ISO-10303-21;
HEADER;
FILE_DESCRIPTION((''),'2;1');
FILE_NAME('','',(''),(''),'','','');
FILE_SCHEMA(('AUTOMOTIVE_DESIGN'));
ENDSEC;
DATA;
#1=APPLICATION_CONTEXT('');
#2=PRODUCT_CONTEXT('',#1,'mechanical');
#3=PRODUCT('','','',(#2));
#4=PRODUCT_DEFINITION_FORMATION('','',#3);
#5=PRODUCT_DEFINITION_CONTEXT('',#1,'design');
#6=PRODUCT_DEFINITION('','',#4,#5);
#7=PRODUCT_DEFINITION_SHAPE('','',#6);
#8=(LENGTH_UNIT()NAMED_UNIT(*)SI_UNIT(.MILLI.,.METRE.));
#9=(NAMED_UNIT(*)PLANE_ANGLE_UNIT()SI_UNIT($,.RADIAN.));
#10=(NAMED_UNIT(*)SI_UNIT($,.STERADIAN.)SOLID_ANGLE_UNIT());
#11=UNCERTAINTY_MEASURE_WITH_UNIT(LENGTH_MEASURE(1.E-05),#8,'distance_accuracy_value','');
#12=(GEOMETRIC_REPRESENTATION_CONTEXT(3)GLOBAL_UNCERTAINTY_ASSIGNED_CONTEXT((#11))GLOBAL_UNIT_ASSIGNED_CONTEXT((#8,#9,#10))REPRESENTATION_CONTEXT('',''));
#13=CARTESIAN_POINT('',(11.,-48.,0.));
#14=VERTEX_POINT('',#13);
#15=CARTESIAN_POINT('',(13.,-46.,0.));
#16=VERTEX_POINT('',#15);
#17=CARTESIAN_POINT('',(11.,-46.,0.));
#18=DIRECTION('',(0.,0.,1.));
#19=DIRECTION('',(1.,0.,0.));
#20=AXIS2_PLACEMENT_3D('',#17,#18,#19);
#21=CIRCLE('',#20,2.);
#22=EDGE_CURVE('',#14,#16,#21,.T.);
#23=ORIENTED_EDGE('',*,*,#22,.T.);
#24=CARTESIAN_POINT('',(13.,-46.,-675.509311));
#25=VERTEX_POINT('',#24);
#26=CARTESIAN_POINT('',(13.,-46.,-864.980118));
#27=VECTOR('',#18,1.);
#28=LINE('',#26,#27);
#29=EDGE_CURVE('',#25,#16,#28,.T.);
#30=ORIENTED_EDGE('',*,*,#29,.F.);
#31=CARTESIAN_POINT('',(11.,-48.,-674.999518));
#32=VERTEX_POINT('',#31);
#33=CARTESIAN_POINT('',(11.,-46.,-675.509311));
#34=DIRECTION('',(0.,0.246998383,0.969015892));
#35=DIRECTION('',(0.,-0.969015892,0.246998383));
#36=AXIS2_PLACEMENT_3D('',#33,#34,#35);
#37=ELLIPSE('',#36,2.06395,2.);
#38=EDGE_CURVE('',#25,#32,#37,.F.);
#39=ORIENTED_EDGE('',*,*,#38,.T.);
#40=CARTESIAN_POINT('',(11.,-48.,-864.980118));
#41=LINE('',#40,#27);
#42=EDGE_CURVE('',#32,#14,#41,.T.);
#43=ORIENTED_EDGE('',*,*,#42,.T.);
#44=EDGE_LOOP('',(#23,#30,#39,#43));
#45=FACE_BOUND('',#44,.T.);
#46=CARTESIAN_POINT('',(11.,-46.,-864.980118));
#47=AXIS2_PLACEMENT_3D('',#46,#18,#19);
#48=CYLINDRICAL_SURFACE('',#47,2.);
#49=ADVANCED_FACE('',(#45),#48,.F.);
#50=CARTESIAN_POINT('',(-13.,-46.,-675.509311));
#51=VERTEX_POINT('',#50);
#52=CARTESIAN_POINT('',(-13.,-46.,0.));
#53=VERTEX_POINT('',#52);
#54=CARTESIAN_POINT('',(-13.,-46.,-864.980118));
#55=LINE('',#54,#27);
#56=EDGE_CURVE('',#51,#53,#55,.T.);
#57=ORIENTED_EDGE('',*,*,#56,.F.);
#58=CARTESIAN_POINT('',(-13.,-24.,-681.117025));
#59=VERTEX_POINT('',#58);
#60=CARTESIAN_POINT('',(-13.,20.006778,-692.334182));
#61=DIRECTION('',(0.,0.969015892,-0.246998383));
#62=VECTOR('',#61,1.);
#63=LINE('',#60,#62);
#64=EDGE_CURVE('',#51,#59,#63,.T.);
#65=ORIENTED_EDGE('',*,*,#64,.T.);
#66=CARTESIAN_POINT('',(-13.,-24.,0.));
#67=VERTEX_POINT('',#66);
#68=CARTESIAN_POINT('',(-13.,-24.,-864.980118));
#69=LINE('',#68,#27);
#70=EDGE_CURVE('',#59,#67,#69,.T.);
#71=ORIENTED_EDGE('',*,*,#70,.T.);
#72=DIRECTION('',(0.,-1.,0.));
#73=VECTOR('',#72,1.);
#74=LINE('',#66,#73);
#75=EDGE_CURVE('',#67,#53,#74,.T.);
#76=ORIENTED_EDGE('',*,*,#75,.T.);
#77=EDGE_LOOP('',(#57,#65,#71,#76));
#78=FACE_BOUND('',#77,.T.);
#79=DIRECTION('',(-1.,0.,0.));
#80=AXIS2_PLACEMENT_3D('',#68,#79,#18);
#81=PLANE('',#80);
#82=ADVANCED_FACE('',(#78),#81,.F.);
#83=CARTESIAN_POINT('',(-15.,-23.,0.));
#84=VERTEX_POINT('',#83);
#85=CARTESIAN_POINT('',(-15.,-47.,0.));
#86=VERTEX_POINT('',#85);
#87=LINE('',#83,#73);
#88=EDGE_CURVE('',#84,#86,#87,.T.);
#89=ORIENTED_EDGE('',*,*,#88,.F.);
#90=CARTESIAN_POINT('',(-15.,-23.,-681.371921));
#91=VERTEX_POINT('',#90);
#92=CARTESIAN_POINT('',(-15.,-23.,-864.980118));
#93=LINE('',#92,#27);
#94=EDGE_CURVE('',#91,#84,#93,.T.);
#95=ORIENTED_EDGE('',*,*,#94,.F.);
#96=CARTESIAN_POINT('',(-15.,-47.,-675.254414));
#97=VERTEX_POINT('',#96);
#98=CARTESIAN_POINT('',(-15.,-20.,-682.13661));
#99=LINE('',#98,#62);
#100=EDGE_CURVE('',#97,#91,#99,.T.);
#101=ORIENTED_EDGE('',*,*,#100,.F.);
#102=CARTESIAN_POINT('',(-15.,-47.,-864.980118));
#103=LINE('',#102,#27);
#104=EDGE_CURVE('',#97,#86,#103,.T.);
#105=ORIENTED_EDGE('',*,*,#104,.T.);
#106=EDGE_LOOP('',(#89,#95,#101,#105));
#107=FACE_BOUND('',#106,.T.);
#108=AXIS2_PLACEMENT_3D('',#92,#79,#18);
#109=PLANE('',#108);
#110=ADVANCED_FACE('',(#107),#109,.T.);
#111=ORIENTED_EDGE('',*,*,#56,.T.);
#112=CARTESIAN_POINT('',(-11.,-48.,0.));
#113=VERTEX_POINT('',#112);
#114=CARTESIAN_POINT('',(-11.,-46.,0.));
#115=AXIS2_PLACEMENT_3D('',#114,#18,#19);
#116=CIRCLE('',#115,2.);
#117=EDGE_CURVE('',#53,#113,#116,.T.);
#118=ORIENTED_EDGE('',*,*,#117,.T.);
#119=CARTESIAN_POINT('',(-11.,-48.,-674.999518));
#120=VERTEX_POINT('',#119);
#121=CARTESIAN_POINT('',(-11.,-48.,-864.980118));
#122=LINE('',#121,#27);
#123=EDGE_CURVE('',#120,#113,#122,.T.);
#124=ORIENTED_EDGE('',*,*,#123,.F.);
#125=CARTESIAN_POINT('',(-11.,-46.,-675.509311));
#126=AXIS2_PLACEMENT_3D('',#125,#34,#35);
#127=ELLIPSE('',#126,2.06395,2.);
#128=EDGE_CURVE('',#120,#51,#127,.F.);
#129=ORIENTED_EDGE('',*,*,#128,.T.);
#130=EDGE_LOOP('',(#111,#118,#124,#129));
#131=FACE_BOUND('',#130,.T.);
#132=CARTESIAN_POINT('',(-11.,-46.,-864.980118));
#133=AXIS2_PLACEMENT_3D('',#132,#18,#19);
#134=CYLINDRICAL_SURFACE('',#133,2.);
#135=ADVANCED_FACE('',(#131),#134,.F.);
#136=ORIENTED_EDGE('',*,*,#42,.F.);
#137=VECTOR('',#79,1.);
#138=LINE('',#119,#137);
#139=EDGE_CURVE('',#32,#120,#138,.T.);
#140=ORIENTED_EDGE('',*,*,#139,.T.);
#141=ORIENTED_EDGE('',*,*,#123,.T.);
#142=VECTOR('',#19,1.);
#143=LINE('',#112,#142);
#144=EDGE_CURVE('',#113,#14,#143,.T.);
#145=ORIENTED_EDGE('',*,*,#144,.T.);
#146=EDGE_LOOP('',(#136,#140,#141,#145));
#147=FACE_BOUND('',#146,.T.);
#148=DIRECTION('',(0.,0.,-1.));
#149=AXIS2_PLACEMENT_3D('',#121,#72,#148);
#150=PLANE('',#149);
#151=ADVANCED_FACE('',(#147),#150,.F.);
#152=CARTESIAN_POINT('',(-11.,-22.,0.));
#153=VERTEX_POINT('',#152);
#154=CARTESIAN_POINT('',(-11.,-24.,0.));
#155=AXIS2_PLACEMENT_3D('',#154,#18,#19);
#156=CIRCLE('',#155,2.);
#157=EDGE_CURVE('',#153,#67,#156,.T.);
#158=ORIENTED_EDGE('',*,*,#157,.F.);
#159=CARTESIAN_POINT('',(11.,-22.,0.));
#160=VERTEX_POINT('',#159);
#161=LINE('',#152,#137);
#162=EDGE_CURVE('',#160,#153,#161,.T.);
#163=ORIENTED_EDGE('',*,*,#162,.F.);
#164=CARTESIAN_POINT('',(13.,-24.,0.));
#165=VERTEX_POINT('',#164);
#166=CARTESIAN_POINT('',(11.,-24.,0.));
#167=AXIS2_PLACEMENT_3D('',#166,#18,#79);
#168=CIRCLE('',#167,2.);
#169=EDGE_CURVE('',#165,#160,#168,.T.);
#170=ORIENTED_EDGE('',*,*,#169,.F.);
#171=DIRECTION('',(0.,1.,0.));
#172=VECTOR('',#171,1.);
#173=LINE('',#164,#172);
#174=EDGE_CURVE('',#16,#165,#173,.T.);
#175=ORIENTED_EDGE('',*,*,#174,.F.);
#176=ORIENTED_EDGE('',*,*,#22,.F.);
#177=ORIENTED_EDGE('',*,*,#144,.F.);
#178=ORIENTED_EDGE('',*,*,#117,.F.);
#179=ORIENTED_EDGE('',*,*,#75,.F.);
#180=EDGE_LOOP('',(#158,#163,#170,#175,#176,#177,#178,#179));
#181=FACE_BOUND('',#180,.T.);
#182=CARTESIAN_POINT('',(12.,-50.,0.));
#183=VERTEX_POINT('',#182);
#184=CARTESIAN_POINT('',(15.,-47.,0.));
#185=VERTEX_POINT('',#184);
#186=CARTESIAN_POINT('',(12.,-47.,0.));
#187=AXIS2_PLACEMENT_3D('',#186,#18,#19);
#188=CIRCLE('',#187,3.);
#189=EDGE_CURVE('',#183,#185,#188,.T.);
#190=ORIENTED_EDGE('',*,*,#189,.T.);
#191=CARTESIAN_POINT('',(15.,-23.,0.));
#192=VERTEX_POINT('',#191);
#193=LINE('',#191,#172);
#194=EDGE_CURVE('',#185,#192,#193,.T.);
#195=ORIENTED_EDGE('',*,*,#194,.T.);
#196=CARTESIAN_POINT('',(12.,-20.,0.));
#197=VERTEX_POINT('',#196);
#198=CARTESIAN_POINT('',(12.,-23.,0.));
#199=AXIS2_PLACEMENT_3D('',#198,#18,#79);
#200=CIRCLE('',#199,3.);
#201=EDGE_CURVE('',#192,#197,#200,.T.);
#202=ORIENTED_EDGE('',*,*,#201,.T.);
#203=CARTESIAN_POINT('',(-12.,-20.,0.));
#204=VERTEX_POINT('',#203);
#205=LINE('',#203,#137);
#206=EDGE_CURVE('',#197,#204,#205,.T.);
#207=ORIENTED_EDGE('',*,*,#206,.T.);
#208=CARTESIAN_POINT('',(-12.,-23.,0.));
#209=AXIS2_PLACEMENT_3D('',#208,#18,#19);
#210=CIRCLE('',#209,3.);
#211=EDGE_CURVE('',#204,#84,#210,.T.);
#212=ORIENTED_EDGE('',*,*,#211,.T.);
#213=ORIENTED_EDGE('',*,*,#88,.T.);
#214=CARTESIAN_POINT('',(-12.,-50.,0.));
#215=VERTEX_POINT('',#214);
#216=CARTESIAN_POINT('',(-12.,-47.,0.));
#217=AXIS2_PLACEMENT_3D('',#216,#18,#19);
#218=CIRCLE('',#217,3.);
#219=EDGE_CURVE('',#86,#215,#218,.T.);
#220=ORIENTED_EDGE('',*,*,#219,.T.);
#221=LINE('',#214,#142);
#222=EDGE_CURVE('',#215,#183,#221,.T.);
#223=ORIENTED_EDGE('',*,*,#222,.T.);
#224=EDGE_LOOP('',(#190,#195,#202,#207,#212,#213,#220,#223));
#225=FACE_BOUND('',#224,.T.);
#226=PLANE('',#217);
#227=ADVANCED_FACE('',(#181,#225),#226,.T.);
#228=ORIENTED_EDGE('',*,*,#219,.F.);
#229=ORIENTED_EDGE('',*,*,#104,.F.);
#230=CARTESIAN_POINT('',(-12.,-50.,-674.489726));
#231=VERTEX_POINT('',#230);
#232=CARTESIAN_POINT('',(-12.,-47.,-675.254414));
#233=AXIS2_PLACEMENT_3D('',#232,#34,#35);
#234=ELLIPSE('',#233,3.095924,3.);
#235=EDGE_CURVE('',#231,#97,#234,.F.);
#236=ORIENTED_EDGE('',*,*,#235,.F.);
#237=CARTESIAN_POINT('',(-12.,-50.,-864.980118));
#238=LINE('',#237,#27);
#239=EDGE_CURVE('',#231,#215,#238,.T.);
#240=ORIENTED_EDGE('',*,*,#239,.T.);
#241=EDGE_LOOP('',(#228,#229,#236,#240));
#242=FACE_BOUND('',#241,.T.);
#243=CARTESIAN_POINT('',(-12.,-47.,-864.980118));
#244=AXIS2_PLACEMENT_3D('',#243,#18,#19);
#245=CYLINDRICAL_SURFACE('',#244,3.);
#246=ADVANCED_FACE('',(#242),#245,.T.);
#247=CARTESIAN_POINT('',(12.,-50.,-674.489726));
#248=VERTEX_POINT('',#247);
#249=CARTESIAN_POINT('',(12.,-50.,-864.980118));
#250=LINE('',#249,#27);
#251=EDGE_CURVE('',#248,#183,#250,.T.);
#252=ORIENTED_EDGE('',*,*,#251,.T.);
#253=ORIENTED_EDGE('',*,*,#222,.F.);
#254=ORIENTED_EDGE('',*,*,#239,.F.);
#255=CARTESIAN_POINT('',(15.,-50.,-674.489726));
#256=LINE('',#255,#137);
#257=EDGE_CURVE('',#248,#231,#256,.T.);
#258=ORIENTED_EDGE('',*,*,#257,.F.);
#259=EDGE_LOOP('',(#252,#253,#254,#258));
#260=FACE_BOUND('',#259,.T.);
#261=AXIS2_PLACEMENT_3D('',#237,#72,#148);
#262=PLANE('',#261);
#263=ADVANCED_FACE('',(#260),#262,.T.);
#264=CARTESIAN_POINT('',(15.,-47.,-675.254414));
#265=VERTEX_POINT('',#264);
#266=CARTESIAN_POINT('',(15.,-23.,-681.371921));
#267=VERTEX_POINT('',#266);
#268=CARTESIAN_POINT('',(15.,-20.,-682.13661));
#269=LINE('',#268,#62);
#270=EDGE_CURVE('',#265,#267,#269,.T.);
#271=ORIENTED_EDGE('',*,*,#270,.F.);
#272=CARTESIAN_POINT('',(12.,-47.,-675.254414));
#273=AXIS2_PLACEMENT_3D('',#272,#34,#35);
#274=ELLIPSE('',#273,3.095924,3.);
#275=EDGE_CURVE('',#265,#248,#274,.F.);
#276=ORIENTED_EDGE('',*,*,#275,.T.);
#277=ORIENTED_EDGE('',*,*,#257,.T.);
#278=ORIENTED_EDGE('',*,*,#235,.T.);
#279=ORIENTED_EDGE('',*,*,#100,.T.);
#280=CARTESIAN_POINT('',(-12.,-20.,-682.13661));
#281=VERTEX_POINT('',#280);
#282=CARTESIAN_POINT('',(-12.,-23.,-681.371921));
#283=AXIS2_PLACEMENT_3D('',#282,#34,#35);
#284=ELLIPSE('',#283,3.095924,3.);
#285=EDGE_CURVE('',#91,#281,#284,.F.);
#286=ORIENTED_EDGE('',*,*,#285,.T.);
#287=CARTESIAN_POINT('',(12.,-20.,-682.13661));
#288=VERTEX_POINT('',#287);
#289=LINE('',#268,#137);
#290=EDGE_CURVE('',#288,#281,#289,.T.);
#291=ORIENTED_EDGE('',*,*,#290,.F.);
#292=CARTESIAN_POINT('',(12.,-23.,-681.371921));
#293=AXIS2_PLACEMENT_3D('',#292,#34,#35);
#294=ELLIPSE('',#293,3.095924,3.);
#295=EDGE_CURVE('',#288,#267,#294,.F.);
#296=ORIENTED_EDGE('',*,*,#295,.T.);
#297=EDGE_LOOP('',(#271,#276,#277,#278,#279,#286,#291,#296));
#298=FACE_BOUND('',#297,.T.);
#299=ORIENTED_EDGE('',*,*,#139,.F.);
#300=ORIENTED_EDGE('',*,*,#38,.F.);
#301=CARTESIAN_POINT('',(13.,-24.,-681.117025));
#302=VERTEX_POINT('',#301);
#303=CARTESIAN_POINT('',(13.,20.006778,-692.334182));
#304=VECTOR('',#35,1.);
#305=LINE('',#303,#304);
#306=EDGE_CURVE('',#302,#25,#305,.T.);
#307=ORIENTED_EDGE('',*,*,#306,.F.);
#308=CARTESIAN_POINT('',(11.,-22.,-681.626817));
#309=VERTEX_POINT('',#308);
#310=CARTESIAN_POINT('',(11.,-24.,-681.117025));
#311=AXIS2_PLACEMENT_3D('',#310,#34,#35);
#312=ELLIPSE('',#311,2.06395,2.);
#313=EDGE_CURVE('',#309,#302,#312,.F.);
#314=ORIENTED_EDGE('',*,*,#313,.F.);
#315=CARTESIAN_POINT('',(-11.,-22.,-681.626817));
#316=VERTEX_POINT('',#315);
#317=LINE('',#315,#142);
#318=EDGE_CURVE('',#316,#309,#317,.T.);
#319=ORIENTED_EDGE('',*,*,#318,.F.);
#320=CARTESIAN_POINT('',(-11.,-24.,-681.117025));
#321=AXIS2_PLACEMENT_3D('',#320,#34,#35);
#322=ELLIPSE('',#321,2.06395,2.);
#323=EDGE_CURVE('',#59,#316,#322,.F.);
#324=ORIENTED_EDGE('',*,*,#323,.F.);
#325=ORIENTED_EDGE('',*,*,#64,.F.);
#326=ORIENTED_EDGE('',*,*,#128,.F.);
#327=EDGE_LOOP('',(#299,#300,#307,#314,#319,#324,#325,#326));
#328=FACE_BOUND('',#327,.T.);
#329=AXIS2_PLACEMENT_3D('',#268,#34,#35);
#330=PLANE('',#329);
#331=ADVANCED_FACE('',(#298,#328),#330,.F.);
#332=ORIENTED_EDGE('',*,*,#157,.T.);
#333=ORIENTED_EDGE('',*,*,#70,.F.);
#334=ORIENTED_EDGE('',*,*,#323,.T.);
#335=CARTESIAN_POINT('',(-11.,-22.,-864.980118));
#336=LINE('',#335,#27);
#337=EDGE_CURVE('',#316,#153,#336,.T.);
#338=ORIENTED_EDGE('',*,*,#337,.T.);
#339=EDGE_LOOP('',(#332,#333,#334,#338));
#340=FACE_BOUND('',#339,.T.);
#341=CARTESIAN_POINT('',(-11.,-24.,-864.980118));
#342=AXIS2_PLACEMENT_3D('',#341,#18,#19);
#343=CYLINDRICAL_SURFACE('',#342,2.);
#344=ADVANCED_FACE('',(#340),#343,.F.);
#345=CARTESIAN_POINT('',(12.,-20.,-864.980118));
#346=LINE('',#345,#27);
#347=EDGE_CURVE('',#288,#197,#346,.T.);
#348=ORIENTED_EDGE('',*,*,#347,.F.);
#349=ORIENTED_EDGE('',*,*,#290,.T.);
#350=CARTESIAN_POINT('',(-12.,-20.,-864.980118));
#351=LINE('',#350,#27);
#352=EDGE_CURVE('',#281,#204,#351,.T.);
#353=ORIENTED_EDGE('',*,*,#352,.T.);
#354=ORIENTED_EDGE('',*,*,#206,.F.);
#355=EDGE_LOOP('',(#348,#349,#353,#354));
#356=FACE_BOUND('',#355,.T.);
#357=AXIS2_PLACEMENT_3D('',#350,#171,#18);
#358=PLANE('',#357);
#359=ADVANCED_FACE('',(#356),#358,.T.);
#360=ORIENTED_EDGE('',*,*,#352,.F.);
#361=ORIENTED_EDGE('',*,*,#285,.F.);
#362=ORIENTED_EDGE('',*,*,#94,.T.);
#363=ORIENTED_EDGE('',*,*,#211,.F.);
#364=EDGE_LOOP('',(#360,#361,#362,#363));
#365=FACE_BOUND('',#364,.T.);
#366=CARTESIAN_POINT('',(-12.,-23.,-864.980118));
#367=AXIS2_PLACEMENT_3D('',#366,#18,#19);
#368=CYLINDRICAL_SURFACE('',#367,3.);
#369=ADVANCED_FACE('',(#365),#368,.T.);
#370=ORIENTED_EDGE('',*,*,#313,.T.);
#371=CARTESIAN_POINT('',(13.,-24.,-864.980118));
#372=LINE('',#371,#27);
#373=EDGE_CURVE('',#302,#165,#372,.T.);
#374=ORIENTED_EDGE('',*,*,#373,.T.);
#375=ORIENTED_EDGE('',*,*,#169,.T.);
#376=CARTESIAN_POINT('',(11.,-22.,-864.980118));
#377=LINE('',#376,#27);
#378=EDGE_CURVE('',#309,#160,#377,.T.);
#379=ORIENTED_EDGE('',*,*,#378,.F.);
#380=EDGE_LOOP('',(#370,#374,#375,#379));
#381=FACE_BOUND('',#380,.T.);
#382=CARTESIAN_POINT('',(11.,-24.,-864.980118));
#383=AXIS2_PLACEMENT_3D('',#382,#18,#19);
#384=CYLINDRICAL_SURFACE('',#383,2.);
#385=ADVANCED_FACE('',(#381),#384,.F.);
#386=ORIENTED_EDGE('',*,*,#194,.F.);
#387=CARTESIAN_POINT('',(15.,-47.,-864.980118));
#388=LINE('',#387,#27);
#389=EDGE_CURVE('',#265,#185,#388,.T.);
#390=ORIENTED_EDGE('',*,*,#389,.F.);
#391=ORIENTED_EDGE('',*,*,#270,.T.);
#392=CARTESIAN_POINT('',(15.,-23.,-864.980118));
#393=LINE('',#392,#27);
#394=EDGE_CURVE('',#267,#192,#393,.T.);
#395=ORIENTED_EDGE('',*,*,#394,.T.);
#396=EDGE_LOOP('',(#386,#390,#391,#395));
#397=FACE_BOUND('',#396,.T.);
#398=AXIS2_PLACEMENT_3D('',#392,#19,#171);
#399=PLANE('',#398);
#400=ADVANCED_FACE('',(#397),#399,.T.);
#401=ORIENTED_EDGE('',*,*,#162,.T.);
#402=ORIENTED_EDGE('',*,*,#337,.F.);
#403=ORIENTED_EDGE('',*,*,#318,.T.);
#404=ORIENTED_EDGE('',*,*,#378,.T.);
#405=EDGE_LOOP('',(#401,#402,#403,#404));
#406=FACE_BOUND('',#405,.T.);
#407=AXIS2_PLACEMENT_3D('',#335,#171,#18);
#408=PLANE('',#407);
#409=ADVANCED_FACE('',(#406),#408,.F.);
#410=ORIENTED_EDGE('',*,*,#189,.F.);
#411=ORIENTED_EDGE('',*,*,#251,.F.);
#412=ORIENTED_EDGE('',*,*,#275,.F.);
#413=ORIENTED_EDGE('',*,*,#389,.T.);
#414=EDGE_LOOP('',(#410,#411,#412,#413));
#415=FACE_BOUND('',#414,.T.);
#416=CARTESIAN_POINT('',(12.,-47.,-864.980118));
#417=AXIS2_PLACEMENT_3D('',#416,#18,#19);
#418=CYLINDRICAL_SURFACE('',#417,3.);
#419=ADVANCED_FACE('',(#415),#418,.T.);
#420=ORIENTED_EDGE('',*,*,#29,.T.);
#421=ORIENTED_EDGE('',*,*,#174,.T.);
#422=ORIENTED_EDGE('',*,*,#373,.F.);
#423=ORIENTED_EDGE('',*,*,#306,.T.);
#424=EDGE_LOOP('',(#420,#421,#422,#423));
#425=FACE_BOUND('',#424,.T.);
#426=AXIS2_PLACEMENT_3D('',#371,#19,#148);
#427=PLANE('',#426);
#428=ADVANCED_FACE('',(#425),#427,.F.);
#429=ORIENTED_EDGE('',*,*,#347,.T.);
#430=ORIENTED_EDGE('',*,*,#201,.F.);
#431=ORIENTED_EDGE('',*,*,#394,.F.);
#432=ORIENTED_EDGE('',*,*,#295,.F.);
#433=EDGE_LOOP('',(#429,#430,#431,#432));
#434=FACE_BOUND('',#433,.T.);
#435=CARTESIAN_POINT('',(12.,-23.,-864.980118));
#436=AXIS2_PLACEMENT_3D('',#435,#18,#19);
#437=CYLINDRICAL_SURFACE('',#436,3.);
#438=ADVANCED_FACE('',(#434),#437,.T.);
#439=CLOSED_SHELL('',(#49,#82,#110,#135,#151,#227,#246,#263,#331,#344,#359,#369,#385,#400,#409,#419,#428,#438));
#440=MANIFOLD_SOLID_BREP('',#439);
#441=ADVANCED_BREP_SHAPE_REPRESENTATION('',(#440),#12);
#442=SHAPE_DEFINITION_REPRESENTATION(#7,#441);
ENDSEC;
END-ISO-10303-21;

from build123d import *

# Parameters (mm, degrees)
EXTRUDE_START       = -864.980118087
EXTRUDE_1_DEPTH     = 864.980118087
CUT_EXTRUDE_1_DEPTH = 867.94325344


# Read off the part's stored shape, not the designer's step: Бобышка-Вытянуть1
with BuildPart() as part:
    # Бобышка-Вытянуть1 outline → Бобышка-Вытянуть1 (new body)
    with BuildSketch(Plane.XY.offset(EXTRUDE_START)):
        with BuildLine():
            Line((-15, -23), (-15, -47))
            ThreePointArc((-15, -47), (-14.121320344, -49.121320344), (-12, -50))
            Line((-12, -50), (12, -50))
            ThreePointArc((12, -50), (14.121320344, -49.121320344), (15, -47))
            Line((15, -47), (15, -23))
            ThreePointArc((15, -23), (14.121320344, -20.878679656), (12, -20))
            Line((12, -20), (-12, -20))
            ThreePointArc((-12, -20), (-14.121320344, -20.878679656), (-15, -23))
        make_face()
        with BuildLine():
            ThreePointArc((-11, -48), (-12.414213562, -47.414213562), (-13, -46))
            Line((-13, -46), (-13, -24))
            ThreePointArc((-13, -24), (-12.414213562, -22.585786438), (-11, -22))
            Line((-11, -22), (11, -22))
            ThreePointArc((11, -22), (12.414213562, -22.585786438), (13, -24))
            Line((13, -24), (13, -46))
            ThreePointArc((13, -46), (12.414213562, -47.414213562), (11, -48))
            Line((11, -48), (-11, -48))
        make_face(mode=Mode.SUBTRACT)
    extrude(amount=EXTRUDE_1_DEPTH)

    # Эскиз2 → Вырез-Вытянуть1 (cut, through all)
    with BuildSketch(Plane.ZY.offset(15)):
        Polygon((-682.136609507, -20), (-674.48972614, -50), (-864.980118087, -50), (-864.980118087, -20), align=None)
    extrude(amount=-CUT_EXTRUDE_1_DEPTH, mode=Mode.SUBTRACT)


solid = part.part
